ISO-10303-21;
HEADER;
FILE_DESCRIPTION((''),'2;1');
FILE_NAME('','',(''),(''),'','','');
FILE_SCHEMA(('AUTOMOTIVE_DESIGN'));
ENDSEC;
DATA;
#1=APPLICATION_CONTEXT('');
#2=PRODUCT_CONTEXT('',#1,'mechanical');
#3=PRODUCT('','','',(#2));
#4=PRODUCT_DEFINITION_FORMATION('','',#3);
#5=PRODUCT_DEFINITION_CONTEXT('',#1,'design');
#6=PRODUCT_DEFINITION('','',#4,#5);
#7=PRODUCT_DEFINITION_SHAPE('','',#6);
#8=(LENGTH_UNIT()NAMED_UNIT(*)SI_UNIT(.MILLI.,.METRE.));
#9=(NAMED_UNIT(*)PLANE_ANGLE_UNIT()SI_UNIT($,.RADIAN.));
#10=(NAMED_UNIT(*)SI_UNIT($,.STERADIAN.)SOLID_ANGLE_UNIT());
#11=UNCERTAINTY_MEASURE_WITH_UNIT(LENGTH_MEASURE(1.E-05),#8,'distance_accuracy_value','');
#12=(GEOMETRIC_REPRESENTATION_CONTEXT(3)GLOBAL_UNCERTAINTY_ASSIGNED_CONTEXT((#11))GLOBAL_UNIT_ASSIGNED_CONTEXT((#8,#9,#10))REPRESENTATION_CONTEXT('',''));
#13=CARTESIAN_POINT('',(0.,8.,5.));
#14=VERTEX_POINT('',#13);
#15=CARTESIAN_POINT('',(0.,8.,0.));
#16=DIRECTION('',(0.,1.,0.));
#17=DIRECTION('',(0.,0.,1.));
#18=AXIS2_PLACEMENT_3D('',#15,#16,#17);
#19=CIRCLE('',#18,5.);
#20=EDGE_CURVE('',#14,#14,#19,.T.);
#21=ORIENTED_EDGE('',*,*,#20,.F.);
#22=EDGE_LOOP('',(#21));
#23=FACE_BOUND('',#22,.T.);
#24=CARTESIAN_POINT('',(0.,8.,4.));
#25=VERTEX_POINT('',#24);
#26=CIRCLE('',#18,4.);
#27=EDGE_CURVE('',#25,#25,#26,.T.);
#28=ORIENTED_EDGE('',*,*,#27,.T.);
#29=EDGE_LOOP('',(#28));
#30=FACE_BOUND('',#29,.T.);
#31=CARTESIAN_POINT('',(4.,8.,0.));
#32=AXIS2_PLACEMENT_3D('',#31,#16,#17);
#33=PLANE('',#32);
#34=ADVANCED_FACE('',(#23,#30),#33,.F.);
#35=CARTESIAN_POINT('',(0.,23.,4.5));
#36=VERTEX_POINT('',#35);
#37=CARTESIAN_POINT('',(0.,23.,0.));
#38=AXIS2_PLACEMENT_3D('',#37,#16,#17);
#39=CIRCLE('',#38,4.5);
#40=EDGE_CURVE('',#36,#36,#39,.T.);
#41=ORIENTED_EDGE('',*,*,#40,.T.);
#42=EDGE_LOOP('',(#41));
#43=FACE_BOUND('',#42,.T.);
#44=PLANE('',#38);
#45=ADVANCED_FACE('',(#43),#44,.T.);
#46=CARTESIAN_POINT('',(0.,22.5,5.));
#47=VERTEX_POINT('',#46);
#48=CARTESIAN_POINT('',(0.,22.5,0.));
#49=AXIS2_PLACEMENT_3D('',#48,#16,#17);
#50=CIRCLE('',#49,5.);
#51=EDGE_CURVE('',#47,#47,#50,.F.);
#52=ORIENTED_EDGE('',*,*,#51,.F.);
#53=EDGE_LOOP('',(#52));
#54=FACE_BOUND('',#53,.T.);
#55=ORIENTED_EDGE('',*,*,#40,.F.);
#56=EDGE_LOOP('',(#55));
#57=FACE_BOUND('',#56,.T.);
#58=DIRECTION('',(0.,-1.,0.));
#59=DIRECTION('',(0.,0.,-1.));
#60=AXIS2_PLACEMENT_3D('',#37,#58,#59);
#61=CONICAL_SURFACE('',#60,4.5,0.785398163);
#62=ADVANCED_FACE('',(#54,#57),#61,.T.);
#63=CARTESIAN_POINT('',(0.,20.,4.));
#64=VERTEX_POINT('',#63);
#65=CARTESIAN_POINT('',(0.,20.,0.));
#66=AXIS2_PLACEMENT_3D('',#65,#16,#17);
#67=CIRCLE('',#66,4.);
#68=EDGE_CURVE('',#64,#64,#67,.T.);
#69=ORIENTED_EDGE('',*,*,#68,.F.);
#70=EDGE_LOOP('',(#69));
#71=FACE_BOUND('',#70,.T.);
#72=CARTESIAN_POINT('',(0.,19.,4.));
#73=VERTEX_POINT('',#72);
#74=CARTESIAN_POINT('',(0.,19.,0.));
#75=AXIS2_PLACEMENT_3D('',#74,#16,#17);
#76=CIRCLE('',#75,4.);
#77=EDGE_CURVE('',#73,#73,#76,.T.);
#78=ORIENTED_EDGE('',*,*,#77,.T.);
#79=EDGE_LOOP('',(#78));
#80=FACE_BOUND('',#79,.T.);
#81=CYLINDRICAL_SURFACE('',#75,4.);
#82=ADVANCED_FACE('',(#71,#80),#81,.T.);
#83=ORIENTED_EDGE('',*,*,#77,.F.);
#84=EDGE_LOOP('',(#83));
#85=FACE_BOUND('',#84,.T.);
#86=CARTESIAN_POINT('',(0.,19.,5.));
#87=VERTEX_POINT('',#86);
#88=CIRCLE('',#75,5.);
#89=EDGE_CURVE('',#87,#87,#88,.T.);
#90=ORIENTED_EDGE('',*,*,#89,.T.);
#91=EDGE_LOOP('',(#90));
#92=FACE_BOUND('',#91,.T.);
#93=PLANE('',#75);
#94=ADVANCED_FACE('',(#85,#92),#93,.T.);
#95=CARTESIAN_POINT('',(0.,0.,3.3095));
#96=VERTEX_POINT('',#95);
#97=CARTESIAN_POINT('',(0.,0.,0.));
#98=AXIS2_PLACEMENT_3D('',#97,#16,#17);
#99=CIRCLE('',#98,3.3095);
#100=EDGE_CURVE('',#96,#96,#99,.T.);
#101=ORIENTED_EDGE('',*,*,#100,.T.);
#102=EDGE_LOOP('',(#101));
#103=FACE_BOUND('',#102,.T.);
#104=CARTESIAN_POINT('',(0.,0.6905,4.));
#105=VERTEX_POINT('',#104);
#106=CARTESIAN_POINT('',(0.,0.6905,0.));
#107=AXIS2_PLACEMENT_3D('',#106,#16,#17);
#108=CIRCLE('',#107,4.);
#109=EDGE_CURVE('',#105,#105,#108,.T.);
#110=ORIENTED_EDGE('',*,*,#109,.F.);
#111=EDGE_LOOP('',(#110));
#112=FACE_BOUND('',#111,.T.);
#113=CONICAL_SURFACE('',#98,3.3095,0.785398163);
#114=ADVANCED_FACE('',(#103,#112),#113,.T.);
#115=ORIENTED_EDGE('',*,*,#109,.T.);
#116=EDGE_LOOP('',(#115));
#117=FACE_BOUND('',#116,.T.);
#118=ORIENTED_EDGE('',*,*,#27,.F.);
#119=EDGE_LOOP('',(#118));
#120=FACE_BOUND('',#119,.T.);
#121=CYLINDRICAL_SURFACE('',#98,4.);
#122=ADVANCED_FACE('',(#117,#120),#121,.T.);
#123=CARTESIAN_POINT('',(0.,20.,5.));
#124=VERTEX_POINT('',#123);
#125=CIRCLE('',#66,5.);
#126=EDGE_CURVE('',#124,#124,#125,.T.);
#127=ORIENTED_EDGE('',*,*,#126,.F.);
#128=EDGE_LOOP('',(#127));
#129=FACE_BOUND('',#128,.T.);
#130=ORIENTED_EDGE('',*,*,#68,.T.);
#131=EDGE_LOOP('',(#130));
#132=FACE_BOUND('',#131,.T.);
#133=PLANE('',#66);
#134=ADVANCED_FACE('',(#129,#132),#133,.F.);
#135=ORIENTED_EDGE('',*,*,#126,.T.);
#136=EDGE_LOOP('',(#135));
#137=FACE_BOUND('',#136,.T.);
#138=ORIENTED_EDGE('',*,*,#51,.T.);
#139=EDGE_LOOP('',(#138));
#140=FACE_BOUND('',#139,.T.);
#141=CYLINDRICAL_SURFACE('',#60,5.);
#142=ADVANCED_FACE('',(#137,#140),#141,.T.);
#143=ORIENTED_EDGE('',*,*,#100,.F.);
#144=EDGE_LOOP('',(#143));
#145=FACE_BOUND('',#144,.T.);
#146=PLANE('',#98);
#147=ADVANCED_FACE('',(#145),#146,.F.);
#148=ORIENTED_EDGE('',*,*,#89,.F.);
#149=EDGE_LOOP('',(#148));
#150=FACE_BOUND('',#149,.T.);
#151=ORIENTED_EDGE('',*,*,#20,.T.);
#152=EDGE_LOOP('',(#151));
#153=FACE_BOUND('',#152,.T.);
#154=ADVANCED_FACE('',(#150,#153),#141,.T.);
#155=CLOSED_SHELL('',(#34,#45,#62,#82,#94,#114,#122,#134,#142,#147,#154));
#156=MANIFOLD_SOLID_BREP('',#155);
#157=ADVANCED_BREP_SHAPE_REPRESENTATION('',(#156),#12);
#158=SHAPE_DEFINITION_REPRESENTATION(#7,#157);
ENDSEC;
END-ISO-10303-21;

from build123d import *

# Parameters (mm, degrees)
SKETCH1_R           = 5
BOSS_EXTRUDE1_DEPTH = 23
CHAMFER1_SIZE       = 0.5
CUT_EXTRUDE1_START  = -3
SKETCH2_R           = 6
SKETCH2_R_2         = 4
CUT_EXTRUDE1_DEPTH  = 1


# Read off the part's stored shape, not the designer's step: M8 Machine Threads Stud1
with BuildPart() as part:
    # Sketch1 → Boss-Extrude1 (new body)
    with BuildSketch(Plane(origin=(0, 0, 0), x_dir=(1, 0, 0), z_dir=(0, 1, 0))):
        with Locations(Location((0, 0, 0), (0, 0, 270))):
            Circle(SKETCH1_R)
    extrude(amount=BOSS_EXTRUDE1_DEPTH)

    # Chamfer1
    chamfer1_edges = [part.edges().sort_by_distance(p)[0] for p in [
        (0, 23, -5),
    ]]
    chamfer(chamfer1_edges, length=CHAMFER1_SIZE)

    # Sketch2 → Cut-Extrude1 (cut)
    with BuildSketch(Plane(origin=(0, 23, 0), x_dir=(1, 0, 0), z_dir=(0, 1, 0)).offset(CUT_EXTRUDE1_START)):
        Circle(SKETCH2_R)
        with Locations(Location((0, 0, 0), (0, 0, 270))):
            Circle(SKETCH2_R_2, mode=Mode.SUBTRACT)
    extrude(amount=-CUT_EXTRUDE1_DEPTH, mode=Mode.SUBTRACT)

    # M8 Machine Threads Stud1 outline → M8 Machine Threads Stud1 (revolve, cut)
    with BuildSketch(Plane.XY):
        Polygon((3.3095, 0), (5, 0), (5, 8), (4, 8), (4, 0.6905), align=None)
    revolve(axis=Axis((0, 0, 0), (0, 1, 0)), mode=Mode.SUBTRACT)


solid = part.part
